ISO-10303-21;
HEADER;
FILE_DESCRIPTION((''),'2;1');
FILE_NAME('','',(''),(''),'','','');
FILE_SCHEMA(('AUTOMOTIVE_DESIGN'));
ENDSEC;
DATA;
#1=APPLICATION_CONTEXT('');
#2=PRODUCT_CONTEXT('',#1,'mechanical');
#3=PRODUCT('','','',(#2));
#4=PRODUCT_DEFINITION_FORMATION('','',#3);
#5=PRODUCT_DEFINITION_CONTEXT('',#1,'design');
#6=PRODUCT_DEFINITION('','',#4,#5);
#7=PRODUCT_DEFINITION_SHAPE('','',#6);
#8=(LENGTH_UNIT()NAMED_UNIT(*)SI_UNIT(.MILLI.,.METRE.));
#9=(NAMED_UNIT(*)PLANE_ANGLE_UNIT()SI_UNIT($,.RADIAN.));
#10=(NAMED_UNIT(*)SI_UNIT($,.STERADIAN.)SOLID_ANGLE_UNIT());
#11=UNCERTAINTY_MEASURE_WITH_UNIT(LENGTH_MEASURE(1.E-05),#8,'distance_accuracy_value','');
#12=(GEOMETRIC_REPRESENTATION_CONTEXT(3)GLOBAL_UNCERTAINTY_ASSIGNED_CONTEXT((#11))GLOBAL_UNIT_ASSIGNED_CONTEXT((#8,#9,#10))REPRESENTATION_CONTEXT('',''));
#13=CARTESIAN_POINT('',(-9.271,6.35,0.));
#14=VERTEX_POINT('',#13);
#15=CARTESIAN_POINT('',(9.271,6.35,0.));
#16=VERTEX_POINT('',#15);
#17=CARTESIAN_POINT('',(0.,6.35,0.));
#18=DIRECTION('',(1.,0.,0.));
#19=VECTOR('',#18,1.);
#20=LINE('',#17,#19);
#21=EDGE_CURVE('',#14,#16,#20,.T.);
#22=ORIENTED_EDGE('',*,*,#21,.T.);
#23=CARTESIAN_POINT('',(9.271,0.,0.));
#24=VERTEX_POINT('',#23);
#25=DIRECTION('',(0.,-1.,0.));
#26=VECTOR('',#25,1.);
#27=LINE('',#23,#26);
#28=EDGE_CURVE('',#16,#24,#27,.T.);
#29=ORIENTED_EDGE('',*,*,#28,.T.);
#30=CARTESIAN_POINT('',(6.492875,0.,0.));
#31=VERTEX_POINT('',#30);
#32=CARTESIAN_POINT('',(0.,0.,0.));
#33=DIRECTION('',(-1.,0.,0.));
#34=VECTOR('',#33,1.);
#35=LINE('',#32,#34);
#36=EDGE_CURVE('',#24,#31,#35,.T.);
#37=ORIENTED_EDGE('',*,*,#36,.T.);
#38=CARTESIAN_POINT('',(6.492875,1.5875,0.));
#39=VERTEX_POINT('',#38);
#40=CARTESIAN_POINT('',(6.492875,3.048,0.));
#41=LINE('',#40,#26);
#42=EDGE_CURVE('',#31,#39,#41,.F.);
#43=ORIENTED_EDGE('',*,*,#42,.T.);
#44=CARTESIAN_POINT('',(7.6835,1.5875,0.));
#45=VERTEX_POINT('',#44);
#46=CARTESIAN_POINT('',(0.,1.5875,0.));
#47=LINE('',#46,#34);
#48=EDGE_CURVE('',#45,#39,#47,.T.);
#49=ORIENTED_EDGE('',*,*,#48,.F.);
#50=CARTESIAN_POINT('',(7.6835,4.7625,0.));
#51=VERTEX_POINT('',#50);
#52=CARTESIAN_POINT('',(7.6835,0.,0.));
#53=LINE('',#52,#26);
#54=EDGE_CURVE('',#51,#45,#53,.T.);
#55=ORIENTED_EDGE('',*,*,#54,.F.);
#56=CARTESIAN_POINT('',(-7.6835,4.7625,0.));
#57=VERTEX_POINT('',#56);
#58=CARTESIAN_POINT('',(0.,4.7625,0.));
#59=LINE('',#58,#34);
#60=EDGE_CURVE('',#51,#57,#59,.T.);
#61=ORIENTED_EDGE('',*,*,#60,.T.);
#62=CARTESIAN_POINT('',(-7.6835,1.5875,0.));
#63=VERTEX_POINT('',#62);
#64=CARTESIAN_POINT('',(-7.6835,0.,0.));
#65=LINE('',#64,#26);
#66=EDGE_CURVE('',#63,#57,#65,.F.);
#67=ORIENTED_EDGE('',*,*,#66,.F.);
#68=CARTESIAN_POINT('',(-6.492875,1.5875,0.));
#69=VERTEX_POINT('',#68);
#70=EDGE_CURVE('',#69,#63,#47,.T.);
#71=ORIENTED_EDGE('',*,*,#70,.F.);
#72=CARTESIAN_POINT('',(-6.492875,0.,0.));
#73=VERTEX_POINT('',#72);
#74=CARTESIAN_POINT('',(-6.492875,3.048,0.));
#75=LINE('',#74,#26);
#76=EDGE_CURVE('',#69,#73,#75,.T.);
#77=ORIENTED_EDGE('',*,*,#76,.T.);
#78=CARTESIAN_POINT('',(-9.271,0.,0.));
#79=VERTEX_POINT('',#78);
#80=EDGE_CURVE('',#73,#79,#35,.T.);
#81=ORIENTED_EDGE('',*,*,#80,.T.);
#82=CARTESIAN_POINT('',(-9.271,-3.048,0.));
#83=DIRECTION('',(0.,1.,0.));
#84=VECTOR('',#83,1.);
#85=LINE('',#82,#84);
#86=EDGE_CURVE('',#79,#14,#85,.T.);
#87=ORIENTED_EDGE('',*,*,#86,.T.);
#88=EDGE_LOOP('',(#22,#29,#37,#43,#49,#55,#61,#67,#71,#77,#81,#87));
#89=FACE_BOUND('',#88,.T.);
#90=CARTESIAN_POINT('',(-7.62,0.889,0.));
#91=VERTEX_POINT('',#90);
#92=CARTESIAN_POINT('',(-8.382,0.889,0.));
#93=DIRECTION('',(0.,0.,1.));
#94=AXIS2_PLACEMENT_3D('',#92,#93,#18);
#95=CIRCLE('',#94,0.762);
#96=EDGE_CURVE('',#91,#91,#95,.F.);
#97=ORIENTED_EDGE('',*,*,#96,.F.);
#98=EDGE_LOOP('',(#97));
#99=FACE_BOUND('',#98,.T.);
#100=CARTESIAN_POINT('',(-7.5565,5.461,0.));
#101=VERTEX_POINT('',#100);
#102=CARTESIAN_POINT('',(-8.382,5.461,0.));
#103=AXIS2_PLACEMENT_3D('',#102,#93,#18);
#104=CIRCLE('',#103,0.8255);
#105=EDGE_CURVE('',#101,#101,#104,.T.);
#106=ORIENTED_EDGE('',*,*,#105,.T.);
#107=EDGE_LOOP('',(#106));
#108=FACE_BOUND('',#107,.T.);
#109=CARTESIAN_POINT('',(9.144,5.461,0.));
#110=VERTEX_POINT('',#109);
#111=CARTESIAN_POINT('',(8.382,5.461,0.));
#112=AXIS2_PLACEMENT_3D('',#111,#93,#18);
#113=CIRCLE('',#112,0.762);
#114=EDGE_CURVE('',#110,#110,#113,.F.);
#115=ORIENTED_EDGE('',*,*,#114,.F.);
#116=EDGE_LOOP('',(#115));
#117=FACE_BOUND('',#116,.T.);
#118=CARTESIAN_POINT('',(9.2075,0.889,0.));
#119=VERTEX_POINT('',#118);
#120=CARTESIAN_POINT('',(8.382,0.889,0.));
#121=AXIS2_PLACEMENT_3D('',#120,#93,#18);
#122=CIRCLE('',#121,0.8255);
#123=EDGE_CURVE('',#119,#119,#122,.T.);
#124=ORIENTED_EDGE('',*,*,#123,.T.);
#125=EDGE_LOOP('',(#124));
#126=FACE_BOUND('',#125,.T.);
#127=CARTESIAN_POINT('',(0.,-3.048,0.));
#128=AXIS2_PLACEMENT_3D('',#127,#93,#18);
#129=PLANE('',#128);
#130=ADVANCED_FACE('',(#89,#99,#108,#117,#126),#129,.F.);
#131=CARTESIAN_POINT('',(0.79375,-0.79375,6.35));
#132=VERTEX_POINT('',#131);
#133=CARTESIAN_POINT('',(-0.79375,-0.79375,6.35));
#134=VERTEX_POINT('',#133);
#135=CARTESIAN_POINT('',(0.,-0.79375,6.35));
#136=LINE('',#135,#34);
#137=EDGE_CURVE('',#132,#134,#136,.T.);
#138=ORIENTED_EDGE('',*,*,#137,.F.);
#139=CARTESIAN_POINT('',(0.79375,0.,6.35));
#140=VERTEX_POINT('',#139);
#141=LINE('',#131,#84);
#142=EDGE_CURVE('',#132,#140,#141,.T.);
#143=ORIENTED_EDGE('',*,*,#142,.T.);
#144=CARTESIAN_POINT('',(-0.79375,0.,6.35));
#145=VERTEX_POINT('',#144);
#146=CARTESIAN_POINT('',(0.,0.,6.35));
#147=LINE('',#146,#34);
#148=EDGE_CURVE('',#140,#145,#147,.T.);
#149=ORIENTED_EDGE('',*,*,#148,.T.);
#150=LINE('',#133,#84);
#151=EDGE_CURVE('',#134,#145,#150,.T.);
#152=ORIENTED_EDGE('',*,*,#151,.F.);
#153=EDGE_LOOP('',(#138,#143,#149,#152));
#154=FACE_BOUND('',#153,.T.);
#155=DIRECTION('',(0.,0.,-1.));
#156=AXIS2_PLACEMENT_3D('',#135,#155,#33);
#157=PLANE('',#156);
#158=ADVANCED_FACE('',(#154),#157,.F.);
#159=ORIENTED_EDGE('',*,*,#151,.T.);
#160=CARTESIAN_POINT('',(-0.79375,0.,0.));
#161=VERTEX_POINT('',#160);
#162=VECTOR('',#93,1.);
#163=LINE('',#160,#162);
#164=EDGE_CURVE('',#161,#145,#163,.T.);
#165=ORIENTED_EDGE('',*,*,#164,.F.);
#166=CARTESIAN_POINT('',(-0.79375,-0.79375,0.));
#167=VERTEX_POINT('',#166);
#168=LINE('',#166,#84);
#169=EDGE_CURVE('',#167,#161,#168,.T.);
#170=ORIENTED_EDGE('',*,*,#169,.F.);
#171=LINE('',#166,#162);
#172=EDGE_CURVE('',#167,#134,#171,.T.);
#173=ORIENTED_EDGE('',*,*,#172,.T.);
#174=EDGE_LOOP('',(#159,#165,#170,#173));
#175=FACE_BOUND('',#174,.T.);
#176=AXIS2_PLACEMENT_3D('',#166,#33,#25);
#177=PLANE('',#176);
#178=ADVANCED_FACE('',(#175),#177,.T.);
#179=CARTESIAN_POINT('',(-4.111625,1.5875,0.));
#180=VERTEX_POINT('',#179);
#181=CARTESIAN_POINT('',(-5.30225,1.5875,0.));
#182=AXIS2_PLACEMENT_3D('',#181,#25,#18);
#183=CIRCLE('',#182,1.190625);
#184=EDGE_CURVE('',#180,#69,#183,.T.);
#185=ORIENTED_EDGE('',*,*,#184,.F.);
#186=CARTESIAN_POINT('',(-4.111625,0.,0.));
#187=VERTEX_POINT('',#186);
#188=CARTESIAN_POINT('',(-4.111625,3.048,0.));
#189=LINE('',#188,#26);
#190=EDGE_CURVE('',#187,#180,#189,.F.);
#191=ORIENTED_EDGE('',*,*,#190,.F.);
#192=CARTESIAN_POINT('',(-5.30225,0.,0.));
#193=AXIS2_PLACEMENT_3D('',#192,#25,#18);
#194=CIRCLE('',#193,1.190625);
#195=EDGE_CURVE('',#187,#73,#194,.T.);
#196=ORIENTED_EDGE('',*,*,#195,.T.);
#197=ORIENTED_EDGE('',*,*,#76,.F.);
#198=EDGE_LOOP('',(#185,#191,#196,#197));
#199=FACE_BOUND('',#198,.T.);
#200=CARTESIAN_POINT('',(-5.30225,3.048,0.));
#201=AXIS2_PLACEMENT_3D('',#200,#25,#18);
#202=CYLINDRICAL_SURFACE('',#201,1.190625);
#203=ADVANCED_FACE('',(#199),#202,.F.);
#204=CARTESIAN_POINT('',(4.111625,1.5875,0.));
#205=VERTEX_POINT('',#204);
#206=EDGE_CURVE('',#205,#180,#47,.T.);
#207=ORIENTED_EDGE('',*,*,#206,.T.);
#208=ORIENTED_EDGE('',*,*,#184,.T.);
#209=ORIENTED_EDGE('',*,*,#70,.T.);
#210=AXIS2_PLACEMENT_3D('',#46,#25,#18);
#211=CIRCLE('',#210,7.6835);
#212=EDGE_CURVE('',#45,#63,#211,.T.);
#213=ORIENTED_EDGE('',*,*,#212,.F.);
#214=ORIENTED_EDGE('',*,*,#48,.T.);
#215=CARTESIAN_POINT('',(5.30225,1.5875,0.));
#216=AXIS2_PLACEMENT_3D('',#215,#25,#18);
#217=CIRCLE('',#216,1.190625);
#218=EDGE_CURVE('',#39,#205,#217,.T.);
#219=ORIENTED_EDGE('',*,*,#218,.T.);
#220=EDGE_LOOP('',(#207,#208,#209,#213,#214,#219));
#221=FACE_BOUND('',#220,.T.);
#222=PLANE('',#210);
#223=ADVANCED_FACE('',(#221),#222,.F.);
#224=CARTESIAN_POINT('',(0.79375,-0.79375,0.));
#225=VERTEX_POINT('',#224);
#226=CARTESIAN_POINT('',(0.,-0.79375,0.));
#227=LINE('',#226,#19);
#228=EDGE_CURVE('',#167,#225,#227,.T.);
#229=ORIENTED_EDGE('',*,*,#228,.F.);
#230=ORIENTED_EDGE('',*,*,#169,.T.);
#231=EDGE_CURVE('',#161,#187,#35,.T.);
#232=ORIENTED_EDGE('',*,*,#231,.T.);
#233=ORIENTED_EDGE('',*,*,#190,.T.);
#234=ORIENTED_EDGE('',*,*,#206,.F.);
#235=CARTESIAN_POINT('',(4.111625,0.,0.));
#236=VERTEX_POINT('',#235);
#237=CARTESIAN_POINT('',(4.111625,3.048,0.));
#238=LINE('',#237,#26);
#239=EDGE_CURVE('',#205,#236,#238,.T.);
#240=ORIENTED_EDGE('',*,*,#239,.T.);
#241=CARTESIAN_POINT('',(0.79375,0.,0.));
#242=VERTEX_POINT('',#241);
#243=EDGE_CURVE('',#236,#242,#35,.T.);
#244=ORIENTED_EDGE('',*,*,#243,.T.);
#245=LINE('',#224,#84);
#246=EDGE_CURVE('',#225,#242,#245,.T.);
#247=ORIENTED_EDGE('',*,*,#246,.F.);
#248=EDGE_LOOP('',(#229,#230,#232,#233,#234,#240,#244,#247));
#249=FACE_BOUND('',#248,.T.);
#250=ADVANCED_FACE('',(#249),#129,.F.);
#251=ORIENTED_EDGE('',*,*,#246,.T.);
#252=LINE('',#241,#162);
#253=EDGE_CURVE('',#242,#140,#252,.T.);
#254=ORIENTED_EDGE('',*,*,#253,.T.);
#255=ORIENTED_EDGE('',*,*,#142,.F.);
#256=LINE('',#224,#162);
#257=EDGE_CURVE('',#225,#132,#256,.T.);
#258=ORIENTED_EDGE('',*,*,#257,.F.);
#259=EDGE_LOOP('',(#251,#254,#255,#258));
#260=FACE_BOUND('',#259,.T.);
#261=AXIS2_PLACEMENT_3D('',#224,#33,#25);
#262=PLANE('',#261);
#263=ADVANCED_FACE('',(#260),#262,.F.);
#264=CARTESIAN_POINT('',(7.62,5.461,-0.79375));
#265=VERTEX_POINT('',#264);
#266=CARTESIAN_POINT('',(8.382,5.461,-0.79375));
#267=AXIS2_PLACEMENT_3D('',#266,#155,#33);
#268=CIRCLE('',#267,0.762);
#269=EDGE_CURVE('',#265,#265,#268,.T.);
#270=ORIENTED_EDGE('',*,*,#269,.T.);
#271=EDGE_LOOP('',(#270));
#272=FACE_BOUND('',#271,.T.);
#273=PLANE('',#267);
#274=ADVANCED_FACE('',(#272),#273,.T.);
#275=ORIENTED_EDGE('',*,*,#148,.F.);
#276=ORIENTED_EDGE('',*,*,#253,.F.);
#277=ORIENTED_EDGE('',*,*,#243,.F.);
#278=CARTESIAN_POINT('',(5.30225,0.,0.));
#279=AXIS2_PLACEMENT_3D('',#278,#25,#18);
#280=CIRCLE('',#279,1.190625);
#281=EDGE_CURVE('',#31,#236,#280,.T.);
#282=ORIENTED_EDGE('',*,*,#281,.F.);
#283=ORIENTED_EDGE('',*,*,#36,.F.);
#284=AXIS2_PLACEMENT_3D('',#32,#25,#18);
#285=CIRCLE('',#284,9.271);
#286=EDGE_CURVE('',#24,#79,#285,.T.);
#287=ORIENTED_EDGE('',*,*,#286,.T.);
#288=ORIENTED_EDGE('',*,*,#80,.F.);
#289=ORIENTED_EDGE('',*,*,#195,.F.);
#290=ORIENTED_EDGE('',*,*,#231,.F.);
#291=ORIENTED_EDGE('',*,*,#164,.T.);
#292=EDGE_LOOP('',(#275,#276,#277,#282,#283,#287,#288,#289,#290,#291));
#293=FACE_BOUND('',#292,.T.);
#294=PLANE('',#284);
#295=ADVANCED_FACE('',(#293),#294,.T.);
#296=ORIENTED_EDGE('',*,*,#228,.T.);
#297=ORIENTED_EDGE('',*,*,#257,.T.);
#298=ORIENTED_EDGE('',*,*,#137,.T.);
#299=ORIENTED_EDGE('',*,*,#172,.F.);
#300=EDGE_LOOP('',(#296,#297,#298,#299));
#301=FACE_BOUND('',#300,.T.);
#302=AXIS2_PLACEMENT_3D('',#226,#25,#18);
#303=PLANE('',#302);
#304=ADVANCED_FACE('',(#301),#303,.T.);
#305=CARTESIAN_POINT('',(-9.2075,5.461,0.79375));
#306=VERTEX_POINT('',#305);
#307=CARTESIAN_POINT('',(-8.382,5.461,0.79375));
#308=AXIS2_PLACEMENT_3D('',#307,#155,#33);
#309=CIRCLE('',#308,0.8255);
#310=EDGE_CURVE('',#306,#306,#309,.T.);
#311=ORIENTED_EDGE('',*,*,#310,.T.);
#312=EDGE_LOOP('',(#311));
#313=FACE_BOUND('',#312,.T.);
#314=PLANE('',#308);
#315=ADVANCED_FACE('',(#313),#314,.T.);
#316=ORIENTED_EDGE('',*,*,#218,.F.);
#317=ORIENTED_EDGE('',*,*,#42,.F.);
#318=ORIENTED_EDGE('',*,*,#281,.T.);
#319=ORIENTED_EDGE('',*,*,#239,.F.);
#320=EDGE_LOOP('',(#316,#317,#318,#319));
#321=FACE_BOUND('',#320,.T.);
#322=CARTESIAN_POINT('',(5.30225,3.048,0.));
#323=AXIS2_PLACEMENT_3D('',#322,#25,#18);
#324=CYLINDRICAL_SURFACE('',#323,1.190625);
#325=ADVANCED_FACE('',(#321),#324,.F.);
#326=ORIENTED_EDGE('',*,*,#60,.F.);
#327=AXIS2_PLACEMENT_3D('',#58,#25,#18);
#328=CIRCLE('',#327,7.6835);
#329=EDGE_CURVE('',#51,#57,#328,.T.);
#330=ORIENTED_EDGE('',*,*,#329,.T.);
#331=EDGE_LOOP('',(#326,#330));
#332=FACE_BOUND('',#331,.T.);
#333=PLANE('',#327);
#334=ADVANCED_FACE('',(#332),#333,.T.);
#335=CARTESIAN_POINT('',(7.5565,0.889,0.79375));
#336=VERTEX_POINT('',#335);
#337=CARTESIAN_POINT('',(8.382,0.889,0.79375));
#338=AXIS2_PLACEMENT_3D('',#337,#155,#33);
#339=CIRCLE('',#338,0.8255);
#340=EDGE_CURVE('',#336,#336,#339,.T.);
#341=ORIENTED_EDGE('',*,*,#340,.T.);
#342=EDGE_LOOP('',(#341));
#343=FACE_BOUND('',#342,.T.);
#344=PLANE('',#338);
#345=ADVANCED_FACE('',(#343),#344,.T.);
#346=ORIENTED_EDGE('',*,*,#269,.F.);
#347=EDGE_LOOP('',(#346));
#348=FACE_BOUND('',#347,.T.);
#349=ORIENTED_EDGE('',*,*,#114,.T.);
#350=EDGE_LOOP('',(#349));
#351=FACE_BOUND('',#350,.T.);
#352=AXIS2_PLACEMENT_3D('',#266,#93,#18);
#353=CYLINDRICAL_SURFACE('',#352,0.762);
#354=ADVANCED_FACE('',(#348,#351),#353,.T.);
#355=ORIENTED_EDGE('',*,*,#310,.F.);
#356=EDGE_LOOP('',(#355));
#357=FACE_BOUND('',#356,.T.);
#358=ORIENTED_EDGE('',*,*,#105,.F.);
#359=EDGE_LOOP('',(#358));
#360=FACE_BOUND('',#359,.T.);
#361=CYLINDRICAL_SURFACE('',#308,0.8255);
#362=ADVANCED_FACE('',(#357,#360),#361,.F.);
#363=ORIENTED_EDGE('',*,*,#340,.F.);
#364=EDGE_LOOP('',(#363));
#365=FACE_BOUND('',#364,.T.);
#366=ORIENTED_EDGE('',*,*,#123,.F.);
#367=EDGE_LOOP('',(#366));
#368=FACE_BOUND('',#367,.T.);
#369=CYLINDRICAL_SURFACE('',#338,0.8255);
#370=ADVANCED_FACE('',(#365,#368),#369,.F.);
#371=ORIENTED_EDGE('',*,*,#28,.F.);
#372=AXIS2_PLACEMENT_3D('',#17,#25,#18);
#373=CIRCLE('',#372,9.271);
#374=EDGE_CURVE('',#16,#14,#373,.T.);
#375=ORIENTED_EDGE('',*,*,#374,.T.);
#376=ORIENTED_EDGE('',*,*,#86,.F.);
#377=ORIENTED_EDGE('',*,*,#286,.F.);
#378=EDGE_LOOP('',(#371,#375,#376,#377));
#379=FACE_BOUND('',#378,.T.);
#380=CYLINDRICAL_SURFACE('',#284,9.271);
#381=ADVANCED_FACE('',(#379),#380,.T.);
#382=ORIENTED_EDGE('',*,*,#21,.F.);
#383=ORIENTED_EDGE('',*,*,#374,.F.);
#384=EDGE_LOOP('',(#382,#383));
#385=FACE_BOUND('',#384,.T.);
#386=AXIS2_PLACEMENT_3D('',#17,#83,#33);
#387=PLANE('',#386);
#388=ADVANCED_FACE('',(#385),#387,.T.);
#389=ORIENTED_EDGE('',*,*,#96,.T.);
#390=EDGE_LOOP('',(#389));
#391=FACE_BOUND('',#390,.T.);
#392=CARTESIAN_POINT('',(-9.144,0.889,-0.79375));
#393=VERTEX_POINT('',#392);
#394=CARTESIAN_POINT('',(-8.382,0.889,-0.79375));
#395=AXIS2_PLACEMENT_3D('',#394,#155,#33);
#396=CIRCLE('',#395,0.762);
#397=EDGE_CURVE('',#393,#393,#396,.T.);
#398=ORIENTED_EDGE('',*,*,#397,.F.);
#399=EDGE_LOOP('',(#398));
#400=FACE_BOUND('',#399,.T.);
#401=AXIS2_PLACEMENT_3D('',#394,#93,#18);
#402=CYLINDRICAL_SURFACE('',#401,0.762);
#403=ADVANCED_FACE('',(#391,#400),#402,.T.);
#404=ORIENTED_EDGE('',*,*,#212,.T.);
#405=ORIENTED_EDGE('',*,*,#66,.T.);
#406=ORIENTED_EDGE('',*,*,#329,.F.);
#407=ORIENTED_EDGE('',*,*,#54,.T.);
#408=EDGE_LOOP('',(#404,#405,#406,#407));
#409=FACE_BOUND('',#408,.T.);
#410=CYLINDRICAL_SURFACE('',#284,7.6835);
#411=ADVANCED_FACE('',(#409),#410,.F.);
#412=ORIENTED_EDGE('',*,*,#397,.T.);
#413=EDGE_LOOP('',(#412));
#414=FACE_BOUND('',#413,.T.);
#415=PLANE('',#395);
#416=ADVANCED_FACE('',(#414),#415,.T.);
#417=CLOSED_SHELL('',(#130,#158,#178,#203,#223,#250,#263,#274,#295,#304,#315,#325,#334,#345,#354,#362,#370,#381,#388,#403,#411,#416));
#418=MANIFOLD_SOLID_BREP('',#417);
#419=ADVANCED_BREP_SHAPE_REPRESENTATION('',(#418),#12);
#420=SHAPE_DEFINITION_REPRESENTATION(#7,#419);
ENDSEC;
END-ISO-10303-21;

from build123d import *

# Parameters (mm, degrees)
SKETCH2_W           = 19.314156379
SKETCH2_H           = 10.14409312
CUT_EXTRUDE1_DEPTH  = 9.398
SKETCH3_R           = 1.190625
CUT_EXTRUDE2_DEPTH  = 3.048
SKETCH4_R           = 0.762
SKETCH4_R_2         = 0.8255
BOSS_EXTRUDE1_DEPTH = 0.79375
CUT_EXTRUDE3_START  = -1.5875
SKETCH6_R           = 0.8255
CUT_EXTRUDE3_DEPTH  = 1.5875
SKETCH7_W           = 1.5875
SKETCH7_H           = 6.35
BOSS_EXTRUDE2_DEPTH = 0.79375


with BuildPart() as part:
    # Sketch1 → Revolve1 (revolve)
    with BuildSketch(Plane.XY):
        Polygon((0, 1.5875), (0, 0), (9.271, 0), (9.271, 6.35), (0, 6.35), (0, 4.7625), (7.6835, 4.7625), (7.6835, 1.5875), align=None)
    revolve(axis=Axis((0, 0, 0), (0, 1, 0)))

    # Sketch2 → Cut-Extrude1 (cut)
    with BuildSketch(Plane(origin=(0, 6.35, 0), x_dir=(1, 0, 0), z_dir=(0, 1, 0))):
        with Locations((0.38607819, 5.07204656)):
            Rectangle(SKETCH2_W, SKETCH2_H)
    extrude(amount=-CUT_EXTRUDE1_DEPTH, mode=Mode.SUBTRACT)

    # Sketch3 → Cut-Extrude2 (cut)
    with BuildSketch(Plane.XZ):
        with Locations((5.30225, 0)):
            Circle(SKETCH3_R)
        with Locations((-5.30225, 0)):
            Circle(SKETCH3_R)
    extrude(amount=-CUT_EXTRUDE2_DEPTH, mode=Mode.SUBTRACT)

    # Sketch4 → Boss-Extrude1 (add)
    with BuildSketch(Plane(origin=(0, 0, 0), x_dir=(-1, 0, 0), z_dir=(0, 0, -1))):
        with Locations((-8.382, 5.461)):
            Circle(SKETCH4_R)
        with Locations((-8.382, 0.889)):
            Circle(SKETCH4_R_2)
        with Locations((8.382, 5.461)):
            Circle(SKETCH4_R_2)
        with Locations((8.382, 0.889)):
            Circle(SKETCH4_R)
    extrude(amount=BOSS_EXTRUDE1_DEPTH)

    # Sketch6 → Cut-Extrude3 (cut)
    with BuildSketch(Plane(origin=(0, 0, -0.79375), x_dir=(-1, 0, 0), z_dir=(0, 0, -1)).offset(CUT_EXTRUDE3_START)):
        with Locations((-8.382, 0.889)):
            Circle(SKETCH6_R)
        with Locations((8.382, 5.461)):
            Circle(SKETCH6_R)
    extrude(amount=CUT_EXTRUDE3_DEPTH, mode=Mode.SUBTRACT)

    # Sketch7 → Boss-Extrude2 (add)
    with BuildSketch(Plane.XZ):
        with Locations((0, 3.175)):
            Rectangle(SKETCH7_W, SKETCH7_H)
    extrude(amount=BOSS_EXTRUDE2_DEPTH)


solid = part.part
